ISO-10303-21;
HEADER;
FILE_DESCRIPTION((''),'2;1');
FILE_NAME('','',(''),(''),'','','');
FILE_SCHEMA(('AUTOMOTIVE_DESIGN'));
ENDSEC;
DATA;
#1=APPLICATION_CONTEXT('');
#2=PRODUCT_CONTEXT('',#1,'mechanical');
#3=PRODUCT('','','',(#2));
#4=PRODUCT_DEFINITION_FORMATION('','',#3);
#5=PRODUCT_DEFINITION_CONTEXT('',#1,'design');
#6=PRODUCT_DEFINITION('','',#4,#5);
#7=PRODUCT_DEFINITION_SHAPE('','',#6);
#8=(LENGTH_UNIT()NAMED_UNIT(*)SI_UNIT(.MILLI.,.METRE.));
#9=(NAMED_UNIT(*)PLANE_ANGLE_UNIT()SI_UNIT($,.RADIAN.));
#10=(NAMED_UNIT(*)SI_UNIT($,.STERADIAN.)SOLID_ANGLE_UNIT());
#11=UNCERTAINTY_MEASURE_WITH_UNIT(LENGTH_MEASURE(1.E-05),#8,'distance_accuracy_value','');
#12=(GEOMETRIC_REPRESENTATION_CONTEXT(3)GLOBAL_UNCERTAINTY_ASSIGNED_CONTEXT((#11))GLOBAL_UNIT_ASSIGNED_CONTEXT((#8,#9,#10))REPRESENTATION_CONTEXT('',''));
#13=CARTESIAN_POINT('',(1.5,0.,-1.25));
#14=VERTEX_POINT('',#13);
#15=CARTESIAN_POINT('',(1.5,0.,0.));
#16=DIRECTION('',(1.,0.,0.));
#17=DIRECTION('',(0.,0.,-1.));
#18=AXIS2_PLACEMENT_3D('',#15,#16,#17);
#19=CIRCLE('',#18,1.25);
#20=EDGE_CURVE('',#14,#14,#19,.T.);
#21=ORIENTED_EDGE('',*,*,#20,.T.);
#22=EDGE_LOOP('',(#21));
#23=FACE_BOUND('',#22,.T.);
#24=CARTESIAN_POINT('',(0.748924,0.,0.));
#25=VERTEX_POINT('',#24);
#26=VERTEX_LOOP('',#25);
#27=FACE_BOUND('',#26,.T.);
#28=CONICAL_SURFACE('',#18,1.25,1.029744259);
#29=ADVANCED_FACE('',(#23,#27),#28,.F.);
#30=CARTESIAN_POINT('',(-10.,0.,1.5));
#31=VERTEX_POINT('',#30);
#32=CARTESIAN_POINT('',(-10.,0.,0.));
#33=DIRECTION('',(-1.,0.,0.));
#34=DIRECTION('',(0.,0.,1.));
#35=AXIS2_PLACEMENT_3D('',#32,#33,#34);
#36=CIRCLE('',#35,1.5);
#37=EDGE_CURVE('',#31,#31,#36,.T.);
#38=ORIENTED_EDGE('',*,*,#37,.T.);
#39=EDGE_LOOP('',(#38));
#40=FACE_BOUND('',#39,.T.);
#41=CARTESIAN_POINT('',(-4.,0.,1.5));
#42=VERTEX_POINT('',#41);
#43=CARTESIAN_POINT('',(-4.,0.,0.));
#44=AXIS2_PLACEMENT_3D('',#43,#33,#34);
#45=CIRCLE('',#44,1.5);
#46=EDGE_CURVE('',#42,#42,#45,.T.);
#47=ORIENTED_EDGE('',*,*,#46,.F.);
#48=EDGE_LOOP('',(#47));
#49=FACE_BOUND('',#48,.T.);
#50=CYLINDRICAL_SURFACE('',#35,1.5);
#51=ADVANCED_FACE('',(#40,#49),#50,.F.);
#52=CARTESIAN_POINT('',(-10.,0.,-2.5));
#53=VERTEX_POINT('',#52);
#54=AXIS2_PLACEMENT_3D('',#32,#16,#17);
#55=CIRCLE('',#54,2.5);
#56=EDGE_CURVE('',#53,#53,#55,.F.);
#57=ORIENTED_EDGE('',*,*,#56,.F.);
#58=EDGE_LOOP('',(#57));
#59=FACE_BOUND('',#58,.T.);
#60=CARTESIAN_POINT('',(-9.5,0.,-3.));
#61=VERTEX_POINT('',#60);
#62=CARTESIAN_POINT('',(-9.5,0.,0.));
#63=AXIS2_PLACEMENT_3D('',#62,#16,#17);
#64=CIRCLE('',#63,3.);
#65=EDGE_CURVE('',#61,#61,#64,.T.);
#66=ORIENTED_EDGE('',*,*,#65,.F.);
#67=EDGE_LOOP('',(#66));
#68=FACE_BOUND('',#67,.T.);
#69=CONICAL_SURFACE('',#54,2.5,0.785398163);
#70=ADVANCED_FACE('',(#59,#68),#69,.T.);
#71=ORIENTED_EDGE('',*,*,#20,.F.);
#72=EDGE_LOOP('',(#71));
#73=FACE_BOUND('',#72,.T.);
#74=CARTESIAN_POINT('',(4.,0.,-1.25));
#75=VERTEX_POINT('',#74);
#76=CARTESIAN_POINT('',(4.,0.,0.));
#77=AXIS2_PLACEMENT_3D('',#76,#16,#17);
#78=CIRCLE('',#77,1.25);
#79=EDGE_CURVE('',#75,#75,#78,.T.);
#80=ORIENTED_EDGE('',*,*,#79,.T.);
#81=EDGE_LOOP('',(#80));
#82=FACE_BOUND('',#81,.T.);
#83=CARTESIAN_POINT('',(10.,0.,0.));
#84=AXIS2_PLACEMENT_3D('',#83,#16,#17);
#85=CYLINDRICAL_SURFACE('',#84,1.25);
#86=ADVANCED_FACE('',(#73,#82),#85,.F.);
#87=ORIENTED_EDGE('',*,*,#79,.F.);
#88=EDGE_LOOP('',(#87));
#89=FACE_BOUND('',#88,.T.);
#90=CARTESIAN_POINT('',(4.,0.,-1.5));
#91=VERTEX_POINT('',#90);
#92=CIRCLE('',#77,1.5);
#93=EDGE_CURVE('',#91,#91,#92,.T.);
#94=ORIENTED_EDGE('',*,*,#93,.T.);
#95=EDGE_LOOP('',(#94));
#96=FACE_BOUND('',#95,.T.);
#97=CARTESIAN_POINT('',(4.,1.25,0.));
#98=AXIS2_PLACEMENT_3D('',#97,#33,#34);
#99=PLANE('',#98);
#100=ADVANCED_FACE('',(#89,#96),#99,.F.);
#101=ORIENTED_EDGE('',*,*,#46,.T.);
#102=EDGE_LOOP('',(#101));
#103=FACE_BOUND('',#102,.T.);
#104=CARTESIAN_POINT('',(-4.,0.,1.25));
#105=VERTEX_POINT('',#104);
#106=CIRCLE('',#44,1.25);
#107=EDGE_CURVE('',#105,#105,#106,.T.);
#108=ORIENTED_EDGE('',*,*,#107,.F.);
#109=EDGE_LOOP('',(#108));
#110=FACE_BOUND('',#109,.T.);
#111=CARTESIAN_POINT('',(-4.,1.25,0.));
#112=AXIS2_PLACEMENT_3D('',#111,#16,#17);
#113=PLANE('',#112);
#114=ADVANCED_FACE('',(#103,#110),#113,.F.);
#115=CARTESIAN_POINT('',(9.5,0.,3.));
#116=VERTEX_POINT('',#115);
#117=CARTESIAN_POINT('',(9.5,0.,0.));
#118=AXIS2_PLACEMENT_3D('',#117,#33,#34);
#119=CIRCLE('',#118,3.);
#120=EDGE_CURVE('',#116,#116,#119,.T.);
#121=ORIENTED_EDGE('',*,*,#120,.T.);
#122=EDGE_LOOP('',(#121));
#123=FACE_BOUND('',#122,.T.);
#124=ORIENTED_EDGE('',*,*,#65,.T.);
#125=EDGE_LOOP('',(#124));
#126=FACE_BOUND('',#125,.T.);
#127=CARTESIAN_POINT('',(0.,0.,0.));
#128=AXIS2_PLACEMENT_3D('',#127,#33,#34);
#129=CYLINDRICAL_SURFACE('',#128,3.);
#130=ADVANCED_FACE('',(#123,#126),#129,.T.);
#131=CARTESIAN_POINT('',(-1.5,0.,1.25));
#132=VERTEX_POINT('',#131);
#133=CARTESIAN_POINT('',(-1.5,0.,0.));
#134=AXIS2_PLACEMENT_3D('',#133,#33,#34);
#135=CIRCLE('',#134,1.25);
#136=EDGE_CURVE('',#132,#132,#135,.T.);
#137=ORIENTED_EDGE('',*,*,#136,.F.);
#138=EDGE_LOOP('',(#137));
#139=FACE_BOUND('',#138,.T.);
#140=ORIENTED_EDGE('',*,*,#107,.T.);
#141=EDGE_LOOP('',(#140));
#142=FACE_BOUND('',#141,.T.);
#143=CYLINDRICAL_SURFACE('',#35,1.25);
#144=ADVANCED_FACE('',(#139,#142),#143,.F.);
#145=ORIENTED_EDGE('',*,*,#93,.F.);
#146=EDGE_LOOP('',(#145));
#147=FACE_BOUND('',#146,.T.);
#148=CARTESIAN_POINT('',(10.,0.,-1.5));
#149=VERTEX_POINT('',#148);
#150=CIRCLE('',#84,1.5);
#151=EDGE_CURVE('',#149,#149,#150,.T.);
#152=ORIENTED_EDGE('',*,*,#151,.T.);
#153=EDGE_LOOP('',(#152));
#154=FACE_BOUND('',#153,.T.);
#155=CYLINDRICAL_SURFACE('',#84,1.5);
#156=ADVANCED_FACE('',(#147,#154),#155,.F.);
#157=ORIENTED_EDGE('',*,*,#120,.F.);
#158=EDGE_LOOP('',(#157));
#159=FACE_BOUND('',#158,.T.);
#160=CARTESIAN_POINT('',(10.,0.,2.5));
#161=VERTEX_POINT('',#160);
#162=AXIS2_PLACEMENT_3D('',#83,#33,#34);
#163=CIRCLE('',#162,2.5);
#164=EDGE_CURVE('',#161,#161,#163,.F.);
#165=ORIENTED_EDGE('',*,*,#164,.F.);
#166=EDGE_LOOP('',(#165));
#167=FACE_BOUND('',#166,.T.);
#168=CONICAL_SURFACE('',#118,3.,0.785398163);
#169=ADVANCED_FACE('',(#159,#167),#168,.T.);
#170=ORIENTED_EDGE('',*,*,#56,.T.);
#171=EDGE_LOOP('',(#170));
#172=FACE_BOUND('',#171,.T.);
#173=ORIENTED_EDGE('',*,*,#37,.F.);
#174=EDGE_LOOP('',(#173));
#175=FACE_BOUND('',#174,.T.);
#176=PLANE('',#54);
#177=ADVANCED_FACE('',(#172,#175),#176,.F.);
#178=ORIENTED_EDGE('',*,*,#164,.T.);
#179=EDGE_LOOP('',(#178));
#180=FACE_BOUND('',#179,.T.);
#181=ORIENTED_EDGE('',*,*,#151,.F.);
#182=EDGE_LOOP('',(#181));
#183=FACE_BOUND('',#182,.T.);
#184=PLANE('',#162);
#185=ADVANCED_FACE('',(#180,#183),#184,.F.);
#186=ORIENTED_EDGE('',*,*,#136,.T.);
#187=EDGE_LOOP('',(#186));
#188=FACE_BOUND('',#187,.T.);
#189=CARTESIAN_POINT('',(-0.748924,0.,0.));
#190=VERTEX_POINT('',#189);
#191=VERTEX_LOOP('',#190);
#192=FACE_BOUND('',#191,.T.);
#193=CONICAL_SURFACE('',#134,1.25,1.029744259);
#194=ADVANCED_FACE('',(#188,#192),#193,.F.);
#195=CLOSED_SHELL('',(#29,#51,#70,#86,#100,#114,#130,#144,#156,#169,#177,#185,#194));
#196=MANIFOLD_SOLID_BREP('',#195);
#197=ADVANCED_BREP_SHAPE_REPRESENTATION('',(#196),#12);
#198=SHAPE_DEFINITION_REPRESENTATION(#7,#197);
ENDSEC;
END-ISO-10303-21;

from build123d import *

# Parameters (mm, degrees)
SKETCH_1_W     = 20
SKETCH_1_H     = 3
CHAMFER_1_SIZE = 0.5


# Read off the part's stored shape, not the designer's step: M3x0.5 ねじ穴2
with BuildPart() as part:
    # ｽｹｯﾁ1 → 回転1 (revolve)
    with BuildSketch(Plane.XY, mode=Mode.PRIVATE) as revolve_1_sk:
        with Locations((0, 1.5)):
            Rectangle(SKETCH_1_W, SKETCH_1_H)
    revolve(revolve_1_sk.sketch.rotate(Axis((0, 0, 0), (1, 0, 0)), 90), axis=Axis((0, 0, 0), (1, 0, 0)))

    # M3x0.5 ねじ穴2 outline → M3x0.5 ねじ穴2 (revolve, cut)
    with BuildSketch(Plane.YX):
        Polygon((0, 10), (0, 0.748924226), (1.25, 1.5), (1.25, 4), (1.5, 4), (1.5, 10), align=None)
        Polygon((1.25, -1.5), (0, -0.748924226), (0, -10), (1.5, -10), (1.5, -4), (1.25, -4), align=None)
    revolve(axis=Axis((0, 0, 0), (1, 0, 0)), mode=Mode.SUBTRACT)

    # 面取り1
    chamfer_1_edges = [part.edges().sort_by_distance(p)[0] for p in [
        (-10, 0, -3),
        (10, 0, -3),
    ]]
    chamfer(chamfer_1_edges, length=CHAMFER_1_SIZE)


solid = part.part
